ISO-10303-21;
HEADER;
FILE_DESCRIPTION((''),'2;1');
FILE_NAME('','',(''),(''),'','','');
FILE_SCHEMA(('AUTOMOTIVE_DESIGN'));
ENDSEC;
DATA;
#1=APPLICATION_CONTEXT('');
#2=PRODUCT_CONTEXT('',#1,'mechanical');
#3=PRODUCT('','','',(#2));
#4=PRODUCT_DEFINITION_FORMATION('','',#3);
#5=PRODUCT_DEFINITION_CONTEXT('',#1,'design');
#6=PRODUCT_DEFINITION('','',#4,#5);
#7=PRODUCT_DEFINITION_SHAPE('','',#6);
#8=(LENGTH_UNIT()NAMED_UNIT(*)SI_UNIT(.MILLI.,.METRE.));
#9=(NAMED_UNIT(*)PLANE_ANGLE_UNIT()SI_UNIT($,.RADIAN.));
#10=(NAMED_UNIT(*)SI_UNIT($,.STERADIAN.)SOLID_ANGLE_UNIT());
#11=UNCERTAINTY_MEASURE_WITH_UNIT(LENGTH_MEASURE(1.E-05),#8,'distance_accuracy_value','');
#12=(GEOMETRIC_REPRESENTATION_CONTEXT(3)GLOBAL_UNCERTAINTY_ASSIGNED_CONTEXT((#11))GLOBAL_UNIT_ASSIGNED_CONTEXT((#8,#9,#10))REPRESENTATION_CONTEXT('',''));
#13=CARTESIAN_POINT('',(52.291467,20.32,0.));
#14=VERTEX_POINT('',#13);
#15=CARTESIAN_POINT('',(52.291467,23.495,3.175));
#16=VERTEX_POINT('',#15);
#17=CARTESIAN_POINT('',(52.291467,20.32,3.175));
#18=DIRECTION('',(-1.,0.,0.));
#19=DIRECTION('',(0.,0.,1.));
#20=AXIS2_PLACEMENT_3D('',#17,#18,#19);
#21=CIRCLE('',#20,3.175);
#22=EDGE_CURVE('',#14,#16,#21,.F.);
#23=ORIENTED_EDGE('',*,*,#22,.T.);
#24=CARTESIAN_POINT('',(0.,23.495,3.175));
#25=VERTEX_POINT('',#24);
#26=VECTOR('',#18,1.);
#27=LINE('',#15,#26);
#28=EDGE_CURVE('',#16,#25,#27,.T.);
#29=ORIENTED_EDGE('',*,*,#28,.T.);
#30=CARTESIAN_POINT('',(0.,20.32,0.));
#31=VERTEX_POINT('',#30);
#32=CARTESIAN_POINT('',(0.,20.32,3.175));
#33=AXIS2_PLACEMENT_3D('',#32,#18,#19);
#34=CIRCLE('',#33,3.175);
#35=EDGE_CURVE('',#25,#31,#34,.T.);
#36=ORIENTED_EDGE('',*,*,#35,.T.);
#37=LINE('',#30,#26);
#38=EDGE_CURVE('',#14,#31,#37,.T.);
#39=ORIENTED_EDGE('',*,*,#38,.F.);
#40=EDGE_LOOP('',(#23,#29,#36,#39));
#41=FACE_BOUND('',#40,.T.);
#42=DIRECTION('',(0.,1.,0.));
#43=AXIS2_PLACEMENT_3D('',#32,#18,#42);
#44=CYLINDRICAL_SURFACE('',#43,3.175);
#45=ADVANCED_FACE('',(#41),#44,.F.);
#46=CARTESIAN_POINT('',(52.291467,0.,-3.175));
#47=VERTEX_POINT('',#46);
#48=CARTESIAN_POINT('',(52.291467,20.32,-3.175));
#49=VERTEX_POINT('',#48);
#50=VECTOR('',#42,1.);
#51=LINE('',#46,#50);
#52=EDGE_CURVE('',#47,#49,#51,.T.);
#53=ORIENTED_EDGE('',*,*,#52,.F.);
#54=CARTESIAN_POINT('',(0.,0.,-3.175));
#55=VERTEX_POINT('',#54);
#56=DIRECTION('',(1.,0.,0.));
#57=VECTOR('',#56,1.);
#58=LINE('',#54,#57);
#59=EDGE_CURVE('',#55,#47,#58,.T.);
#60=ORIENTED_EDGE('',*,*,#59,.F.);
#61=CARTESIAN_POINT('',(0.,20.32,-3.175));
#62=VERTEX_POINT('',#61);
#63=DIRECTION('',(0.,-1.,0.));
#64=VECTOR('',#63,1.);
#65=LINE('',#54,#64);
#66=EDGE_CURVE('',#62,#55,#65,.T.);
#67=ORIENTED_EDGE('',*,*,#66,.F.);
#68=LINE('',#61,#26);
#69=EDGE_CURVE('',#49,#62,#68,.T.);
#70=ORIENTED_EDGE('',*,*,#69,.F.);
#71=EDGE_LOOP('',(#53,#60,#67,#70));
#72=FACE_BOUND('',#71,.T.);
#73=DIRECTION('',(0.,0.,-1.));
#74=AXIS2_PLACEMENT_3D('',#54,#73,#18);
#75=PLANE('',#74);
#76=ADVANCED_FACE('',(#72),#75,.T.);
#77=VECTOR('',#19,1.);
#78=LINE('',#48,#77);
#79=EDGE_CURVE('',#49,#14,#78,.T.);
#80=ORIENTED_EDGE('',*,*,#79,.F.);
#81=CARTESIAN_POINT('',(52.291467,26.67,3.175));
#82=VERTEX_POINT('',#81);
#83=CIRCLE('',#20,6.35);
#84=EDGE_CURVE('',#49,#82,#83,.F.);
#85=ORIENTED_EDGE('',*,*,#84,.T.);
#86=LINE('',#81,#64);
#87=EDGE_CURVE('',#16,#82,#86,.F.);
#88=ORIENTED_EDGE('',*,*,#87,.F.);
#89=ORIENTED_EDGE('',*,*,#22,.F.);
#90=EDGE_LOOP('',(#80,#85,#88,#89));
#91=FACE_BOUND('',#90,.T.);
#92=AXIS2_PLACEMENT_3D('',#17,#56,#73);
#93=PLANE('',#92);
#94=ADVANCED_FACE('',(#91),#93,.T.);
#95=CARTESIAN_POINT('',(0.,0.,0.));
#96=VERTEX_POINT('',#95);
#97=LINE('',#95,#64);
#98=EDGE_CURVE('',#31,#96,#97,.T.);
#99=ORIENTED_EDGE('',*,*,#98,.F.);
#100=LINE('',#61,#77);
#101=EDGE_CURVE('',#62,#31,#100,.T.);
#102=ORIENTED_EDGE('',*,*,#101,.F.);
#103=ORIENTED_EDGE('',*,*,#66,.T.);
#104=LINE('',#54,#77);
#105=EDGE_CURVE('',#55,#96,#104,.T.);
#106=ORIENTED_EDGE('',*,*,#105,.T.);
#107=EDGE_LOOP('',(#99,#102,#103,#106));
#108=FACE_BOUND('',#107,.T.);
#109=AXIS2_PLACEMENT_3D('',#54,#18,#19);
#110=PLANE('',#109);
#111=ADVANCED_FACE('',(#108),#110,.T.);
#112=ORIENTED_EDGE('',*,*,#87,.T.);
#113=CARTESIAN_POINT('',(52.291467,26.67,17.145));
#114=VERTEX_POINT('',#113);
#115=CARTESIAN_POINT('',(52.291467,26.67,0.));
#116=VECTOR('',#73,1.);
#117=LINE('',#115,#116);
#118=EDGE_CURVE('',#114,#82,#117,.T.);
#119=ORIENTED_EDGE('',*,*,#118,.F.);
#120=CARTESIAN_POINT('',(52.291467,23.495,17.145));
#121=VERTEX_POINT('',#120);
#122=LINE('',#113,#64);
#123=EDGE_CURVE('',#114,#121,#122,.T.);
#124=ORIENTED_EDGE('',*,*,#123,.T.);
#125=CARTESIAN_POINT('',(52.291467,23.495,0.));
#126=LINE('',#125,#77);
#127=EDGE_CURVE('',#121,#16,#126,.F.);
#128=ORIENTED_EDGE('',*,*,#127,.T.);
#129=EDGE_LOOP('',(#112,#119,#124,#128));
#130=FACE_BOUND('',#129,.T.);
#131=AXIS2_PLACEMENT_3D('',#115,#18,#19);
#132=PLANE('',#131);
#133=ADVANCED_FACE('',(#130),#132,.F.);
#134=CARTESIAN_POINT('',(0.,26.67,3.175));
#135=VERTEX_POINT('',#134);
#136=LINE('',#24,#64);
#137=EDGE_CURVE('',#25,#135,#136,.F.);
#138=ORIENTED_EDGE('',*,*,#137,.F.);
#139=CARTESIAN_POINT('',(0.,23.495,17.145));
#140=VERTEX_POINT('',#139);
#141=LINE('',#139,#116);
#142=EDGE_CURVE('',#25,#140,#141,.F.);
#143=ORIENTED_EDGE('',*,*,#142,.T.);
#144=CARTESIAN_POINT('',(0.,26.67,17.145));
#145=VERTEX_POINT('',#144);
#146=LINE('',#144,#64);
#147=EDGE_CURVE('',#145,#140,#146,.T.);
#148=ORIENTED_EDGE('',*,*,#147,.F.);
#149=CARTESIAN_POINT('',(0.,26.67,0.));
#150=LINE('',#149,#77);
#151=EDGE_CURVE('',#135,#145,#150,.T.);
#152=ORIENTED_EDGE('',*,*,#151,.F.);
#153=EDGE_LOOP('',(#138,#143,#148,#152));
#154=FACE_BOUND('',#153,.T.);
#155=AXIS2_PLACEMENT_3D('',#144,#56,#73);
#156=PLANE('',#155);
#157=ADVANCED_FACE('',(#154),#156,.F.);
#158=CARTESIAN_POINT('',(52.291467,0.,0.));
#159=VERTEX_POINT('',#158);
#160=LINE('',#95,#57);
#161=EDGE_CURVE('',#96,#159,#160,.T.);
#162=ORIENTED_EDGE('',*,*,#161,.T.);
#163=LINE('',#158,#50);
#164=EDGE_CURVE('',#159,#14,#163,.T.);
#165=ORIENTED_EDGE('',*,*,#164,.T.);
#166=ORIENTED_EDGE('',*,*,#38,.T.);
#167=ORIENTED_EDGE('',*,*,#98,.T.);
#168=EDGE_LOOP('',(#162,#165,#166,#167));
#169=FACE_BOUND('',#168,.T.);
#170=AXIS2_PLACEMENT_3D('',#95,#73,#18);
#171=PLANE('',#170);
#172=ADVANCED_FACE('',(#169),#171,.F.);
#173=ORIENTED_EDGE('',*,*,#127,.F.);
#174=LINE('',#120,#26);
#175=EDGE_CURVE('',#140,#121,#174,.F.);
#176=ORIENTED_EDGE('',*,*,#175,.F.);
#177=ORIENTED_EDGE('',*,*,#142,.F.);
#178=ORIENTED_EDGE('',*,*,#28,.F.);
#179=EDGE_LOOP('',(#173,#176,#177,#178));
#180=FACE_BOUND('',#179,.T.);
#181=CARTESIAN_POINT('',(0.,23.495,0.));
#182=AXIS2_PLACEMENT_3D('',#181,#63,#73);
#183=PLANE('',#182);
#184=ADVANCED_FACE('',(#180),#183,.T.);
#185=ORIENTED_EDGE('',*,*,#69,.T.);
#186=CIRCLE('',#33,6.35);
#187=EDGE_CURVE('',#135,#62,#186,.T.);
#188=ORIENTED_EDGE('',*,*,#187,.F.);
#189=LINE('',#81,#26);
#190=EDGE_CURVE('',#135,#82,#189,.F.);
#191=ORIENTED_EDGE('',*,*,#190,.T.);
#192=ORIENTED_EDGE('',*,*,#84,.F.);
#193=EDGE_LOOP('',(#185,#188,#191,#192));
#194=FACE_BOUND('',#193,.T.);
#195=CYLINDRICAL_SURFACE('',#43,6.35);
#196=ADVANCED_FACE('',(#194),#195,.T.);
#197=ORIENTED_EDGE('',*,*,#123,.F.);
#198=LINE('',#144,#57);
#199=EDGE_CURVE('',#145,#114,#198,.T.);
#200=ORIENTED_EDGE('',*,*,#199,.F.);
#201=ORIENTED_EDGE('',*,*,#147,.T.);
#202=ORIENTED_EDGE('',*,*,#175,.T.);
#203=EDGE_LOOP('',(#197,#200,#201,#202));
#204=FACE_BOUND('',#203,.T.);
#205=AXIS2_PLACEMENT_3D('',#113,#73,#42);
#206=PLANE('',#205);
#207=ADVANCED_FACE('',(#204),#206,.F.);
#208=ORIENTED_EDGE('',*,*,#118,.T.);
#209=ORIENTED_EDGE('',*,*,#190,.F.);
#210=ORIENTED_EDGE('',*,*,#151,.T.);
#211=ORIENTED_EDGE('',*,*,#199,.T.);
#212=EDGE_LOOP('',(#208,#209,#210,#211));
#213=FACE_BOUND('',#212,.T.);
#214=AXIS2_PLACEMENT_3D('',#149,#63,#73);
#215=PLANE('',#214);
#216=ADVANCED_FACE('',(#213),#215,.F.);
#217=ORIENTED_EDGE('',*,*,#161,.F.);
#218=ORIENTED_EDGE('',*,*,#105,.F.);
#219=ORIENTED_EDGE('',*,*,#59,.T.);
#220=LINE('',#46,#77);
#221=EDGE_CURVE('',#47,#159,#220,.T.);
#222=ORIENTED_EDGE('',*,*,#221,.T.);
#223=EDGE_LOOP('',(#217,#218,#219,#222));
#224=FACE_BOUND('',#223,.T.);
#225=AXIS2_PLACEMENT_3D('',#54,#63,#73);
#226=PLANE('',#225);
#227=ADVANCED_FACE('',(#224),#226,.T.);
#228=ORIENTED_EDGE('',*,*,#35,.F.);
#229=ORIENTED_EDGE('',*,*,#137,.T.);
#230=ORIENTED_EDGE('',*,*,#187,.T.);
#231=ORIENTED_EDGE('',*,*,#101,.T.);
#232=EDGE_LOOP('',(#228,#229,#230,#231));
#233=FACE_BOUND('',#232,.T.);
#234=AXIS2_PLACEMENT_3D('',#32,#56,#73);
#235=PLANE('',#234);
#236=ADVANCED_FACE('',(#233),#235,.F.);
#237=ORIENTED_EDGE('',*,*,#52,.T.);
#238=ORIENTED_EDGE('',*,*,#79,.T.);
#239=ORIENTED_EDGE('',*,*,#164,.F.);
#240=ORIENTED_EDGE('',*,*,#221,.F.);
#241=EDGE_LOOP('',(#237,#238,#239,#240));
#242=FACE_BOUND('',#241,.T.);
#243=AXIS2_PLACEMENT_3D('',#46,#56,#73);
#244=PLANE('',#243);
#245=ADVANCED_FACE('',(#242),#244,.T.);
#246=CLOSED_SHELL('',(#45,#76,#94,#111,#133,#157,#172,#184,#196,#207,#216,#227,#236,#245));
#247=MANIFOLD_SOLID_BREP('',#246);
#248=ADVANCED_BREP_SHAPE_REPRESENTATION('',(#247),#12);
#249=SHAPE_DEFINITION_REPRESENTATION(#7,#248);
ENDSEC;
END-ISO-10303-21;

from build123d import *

# Parameters (mm, degrees)
SKETCH2_W          = 52.291467072
SKETCH2_H          = 20.32
BASE_FLANGE1_DEPTH = 3.175
EDGE_FLANGE1_DEPTH = 52.291467072


# Sheet-metal steps are written as plain solids
with BuildPart() as part:
    # Sketch2 → Base-Flange1 (new body)
    with BuildSketch(Plane.XY):
        with Locations((26.145733536, 10.16)):
            Rectangle(SKETCH2_W, SKETCH2_H)
    extrude(amount=-BASE_FLANGE1_DEPTH)

    # Edge-Flange1 section (across the edge) → Edge-Flange1 (add)
    with BuildSketch(Plane(origin=(52.291467072, 23.495, 0), x_dir=(0, -1, 0), z_dir=(-1, 0, 0))):
        with BuildLine():
            Line((-3.175, 3.175), (-3.175, 17.145))
            Line((-3.175, 17.145), (0, 17.145))
            Line((0, 17.145), (0, 3.175))
            ThreePointArc((0, 3.175), (0.92993597, 0.92993597), (3.175, 0))
            Line((3.175, 0), (3.175, -3.175))
            ThreePointArc((3.175, -3.175), (-1.315128061, -1.315128061), (-3.175, 3.175))
        make_face()
    extrude(amount=EDGE_FLANGE1_DEPTH)


solid = part.part
